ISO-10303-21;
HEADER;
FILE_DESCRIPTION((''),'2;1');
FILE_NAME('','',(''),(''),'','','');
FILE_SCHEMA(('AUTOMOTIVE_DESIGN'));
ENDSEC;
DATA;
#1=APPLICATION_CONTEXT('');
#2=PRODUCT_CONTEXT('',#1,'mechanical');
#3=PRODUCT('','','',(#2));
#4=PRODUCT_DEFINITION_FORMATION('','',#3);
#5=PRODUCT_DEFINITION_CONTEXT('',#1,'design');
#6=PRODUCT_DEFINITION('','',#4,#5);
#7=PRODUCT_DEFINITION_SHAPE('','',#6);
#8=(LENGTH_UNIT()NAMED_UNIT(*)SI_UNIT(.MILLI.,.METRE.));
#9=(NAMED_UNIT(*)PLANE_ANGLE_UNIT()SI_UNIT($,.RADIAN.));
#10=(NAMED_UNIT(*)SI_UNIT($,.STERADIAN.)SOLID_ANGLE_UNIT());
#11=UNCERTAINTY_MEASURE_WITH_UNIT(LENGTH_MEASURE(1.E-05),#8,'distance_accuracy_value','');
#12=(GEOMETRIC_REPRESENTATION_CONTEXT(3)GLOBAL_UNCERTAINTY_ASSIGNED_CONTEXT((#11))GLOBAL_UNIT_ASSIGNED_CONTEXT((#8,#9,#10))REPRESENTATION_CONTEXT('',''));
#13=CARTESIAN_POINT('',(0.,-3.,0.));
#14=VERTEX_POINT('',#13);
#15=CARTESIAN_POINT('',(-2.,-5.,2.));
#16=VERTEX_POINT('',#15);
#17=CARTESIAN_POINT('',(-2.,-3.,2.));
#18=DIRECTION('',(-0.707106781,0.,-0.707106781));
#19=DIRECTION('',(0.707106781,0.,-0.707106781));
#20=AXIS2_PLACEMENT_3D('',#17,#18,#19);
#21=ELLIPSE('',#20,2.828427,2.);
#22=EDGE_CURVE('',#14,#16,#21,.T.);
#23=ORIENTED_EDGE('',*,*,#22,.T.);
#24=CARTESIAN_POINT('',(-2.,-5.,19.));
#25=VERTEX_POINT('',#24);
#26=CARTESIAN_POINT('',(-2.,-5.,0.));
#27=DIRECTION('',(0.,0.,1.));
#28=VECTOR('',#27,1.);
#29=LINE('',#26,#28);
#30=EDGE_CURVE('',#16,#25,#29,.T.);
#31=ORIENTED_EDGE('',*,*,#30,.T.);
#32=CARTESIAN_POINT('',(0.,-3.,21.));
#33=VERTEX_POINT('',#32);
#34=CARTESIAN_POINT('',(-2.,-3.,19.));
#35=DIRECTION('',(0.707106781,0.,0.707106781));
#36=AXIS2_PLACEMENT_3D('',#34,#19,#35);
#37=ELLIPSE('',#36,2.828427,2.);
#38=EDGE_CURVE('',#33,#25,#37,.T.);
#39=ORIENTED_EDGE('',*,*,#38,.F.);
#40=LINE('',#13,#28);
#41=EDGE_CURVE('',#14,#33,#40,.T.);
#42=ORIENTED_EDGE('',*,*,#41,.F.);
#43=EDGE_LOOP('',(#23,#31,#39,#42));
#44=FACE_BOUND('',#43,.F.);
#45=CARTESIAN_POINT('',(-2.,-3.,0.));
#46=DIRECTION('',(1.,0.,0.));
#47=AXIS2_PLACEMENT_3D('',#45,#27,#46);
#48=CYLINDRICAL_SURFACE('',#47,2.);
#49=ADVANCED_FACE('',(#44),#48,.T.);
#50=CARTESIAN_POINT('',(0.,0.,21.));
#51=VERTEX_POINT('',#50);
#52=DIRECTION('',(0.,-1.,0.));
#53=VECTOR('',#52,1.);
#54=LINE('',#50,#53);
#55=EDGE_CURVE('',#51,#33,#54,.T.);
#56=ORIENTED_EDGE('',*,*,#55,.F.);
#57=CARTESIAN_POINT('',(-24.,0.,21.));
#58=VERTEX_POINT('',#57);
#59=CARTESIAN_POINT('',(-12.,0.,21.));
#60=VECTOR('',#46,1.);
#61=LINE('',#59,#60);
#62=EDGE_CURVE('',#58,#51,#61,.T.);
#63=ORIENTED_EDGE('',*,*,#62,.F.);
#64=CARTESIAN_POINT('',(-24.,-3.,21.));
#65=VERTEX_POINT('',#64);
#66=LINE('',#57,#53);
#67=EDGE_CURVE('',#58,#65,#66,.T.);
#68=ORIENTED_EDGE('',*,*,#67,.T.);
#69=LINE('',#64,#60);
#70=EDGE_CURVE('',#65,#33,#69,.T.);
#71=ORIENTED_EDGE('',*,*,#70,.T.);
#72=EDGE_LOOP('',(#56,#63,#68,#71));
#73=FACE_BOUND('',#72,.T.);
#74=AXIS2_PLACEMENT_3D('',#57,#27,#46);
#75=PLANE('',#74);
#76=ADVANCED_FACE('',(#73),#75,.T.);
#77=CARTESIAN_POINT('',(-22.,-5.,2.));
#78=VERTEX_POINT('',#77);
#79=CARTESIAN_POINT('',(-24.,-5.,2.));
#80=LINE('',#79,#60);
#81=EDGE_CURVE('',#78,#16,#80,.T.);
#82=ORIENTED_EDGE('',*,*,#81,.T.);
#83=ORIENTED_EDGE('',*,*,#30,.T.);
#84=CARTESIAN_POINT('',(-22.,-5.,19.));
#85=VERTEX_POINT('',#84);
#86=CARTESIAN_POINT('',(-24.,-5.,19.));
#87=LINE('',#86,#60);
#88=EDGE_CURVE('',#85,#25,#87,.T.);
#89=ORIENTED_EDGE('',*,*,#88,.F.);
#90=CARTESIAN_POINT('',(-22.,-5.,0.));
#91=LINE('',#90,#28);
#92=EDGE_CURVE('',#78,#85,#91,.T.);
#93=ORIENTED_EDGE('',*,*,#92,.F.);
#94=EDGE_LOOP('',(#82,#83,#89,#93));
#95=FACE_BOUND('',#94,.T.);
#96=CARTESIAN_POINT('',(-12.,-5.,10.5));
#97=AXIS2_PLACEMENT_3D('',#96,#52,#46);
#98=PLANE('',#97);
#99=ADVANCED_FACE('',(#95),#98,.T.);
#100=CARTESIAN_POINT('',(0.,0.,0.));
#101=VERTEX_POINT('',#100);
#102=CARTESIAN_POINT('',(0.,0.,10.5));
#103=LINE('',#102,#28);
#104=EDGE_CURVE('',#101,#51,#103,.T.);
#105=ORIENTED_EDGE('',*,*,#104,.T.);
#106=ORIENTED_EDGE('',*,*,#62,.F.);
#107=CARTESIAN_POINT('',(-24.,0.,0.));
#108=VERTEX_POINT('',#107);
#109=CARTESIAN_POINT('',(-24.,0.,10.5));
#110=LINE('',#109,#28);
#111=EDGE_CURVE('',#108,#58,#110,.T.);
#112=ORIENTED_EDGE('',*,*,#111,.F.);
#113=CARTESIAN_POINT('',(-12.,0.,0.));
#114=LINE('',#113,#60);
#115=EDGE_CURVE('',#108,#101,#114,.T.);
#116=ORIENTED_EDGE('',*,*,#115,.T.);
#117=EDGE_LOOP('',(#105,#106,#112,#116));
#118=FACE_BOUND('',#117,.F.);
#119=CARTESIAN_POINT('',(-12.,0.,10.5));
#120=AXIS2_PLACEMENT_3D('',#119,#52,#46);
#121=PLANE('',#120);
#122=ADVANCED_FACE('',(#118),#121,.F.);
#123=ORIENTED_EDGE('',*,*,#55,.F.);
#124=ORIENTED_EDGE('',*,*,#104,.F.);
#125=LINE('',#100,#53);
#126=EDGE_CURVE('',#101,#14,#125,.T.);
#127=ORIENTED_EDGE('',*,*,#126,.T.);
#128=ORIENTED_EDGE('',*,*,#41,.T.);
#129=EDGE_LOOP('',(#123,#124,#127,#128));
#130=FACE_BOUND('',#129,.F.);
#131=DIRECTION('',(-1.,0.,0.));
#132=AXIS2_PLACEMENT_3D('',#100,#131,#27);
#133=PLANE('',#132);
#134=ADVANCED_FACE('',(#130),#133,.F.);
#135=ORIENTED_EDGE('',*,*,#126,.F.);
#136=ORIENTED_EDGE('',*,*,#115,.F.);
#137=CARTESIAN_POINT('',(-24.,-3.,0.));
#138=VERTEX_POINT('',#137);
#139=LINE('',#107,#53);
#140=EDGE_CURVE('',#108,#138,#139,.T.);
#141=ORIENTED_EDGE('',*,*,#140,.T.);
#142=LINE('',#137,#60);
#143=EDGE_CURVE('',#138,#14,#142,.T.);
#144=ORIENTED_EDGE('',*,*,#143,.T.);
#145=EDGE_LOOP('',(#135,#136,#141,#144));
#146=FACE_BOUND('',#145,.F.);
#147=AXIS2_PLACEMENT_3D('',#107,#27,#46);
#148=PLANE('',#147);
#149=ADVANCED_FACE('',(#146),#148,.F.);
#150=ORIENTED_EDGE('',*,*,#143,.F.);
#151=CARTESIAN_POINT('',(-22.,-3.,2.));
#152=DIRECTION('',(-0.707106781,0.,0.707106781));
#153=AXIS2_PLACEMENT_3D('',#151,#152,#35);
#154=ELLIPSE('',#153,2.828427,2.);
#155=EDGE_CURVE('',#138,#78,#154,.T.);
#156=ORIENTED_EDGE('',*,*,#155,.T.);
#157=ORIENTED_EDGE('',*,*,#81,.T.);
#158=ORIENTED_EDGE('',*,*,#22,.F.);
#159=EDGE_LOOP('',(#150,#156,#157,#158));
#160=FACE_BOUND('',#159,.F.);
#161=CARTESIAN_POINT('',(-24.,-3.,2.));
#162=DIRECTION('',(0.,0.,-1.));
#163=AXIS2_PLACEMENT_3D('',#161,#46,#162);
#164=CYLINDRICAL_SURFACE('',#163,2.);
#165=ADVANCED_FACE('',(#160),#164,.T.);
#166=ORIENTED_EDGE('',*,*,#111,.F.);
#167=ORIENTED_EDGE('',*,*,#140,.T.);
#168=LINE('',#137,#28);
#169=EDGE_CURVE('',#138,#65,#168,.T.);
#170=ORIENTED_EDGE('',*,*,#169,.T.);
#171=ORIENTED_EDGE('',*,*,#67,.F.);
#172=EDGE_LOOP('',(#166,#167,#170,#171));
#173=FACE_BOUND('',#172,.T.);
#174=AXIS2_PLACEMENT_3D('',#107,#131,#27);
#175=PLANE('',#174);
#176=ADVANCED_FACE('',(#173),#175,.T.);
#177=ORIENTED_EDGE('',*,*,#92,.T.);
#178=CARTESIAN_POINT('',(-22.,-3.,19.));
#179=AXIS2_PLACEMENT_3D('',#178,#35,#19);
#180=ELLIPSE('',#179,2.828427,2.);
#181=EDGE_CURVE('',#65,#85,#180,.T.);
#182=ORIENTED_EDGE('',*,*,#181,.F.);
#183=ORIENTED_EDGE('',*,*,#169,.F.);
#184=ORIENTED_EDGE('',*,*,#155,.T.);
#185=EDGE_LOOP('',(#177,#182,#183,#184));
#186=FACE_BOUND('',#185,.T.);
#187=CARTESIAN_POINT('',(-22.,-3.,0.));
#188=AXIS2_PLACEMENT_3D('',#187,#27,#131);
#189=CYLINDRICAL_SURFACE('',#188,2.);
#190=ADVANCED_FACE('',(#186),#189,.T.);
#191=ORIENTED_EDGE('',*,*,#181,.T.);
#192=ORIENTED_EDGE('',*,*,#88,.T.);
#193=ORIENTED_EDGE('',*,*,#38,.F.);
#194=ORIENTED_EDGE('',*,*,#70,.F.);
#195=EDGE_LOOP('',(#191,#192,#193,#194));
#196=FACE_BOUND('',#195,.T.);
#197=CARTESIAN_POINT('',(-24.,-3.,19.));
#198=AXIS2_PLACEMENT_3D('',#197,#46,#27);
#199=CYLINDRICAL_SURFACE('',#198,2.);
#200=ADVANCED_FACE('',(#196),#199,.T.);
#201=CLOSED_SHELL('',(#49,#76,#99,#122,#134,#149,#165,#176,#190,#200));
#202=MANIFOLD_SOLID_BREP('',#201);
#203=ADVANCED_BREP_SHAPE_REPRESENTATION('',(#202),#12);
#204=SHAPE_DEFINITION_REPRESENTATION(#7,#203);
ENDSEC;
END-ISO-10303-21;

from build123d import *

# Parameters (mm, degrees)
F0_W     = 24
F0_H     = 21
F1_DEPTH = 5
F2_R     = 2


# Not quite as in the source:
# - a feature of the source that left no trace in its solid (it failed there, or was rolled back) is left out


with BuildPart() as f1:
    # F0 (on Front) → F1 (new body)
    with BuildSketch(Plane.XZ):
        with Locations((-12, 10.5)):
            Rectangle(F0_W, F0_H)
    extrude(amount=F1_DEPTH)

    # F2
    f2_edges = [f1.edges().sort_by_distance(p)[0] for p in [
        (-12, -5, 0),
        (0, -5, 10.5),
        (-12, -5, 21),
        (-24, -5, 10.5),
    ]]
    fillet(f2_edges, radius=F2_R)


solid = f1.part
